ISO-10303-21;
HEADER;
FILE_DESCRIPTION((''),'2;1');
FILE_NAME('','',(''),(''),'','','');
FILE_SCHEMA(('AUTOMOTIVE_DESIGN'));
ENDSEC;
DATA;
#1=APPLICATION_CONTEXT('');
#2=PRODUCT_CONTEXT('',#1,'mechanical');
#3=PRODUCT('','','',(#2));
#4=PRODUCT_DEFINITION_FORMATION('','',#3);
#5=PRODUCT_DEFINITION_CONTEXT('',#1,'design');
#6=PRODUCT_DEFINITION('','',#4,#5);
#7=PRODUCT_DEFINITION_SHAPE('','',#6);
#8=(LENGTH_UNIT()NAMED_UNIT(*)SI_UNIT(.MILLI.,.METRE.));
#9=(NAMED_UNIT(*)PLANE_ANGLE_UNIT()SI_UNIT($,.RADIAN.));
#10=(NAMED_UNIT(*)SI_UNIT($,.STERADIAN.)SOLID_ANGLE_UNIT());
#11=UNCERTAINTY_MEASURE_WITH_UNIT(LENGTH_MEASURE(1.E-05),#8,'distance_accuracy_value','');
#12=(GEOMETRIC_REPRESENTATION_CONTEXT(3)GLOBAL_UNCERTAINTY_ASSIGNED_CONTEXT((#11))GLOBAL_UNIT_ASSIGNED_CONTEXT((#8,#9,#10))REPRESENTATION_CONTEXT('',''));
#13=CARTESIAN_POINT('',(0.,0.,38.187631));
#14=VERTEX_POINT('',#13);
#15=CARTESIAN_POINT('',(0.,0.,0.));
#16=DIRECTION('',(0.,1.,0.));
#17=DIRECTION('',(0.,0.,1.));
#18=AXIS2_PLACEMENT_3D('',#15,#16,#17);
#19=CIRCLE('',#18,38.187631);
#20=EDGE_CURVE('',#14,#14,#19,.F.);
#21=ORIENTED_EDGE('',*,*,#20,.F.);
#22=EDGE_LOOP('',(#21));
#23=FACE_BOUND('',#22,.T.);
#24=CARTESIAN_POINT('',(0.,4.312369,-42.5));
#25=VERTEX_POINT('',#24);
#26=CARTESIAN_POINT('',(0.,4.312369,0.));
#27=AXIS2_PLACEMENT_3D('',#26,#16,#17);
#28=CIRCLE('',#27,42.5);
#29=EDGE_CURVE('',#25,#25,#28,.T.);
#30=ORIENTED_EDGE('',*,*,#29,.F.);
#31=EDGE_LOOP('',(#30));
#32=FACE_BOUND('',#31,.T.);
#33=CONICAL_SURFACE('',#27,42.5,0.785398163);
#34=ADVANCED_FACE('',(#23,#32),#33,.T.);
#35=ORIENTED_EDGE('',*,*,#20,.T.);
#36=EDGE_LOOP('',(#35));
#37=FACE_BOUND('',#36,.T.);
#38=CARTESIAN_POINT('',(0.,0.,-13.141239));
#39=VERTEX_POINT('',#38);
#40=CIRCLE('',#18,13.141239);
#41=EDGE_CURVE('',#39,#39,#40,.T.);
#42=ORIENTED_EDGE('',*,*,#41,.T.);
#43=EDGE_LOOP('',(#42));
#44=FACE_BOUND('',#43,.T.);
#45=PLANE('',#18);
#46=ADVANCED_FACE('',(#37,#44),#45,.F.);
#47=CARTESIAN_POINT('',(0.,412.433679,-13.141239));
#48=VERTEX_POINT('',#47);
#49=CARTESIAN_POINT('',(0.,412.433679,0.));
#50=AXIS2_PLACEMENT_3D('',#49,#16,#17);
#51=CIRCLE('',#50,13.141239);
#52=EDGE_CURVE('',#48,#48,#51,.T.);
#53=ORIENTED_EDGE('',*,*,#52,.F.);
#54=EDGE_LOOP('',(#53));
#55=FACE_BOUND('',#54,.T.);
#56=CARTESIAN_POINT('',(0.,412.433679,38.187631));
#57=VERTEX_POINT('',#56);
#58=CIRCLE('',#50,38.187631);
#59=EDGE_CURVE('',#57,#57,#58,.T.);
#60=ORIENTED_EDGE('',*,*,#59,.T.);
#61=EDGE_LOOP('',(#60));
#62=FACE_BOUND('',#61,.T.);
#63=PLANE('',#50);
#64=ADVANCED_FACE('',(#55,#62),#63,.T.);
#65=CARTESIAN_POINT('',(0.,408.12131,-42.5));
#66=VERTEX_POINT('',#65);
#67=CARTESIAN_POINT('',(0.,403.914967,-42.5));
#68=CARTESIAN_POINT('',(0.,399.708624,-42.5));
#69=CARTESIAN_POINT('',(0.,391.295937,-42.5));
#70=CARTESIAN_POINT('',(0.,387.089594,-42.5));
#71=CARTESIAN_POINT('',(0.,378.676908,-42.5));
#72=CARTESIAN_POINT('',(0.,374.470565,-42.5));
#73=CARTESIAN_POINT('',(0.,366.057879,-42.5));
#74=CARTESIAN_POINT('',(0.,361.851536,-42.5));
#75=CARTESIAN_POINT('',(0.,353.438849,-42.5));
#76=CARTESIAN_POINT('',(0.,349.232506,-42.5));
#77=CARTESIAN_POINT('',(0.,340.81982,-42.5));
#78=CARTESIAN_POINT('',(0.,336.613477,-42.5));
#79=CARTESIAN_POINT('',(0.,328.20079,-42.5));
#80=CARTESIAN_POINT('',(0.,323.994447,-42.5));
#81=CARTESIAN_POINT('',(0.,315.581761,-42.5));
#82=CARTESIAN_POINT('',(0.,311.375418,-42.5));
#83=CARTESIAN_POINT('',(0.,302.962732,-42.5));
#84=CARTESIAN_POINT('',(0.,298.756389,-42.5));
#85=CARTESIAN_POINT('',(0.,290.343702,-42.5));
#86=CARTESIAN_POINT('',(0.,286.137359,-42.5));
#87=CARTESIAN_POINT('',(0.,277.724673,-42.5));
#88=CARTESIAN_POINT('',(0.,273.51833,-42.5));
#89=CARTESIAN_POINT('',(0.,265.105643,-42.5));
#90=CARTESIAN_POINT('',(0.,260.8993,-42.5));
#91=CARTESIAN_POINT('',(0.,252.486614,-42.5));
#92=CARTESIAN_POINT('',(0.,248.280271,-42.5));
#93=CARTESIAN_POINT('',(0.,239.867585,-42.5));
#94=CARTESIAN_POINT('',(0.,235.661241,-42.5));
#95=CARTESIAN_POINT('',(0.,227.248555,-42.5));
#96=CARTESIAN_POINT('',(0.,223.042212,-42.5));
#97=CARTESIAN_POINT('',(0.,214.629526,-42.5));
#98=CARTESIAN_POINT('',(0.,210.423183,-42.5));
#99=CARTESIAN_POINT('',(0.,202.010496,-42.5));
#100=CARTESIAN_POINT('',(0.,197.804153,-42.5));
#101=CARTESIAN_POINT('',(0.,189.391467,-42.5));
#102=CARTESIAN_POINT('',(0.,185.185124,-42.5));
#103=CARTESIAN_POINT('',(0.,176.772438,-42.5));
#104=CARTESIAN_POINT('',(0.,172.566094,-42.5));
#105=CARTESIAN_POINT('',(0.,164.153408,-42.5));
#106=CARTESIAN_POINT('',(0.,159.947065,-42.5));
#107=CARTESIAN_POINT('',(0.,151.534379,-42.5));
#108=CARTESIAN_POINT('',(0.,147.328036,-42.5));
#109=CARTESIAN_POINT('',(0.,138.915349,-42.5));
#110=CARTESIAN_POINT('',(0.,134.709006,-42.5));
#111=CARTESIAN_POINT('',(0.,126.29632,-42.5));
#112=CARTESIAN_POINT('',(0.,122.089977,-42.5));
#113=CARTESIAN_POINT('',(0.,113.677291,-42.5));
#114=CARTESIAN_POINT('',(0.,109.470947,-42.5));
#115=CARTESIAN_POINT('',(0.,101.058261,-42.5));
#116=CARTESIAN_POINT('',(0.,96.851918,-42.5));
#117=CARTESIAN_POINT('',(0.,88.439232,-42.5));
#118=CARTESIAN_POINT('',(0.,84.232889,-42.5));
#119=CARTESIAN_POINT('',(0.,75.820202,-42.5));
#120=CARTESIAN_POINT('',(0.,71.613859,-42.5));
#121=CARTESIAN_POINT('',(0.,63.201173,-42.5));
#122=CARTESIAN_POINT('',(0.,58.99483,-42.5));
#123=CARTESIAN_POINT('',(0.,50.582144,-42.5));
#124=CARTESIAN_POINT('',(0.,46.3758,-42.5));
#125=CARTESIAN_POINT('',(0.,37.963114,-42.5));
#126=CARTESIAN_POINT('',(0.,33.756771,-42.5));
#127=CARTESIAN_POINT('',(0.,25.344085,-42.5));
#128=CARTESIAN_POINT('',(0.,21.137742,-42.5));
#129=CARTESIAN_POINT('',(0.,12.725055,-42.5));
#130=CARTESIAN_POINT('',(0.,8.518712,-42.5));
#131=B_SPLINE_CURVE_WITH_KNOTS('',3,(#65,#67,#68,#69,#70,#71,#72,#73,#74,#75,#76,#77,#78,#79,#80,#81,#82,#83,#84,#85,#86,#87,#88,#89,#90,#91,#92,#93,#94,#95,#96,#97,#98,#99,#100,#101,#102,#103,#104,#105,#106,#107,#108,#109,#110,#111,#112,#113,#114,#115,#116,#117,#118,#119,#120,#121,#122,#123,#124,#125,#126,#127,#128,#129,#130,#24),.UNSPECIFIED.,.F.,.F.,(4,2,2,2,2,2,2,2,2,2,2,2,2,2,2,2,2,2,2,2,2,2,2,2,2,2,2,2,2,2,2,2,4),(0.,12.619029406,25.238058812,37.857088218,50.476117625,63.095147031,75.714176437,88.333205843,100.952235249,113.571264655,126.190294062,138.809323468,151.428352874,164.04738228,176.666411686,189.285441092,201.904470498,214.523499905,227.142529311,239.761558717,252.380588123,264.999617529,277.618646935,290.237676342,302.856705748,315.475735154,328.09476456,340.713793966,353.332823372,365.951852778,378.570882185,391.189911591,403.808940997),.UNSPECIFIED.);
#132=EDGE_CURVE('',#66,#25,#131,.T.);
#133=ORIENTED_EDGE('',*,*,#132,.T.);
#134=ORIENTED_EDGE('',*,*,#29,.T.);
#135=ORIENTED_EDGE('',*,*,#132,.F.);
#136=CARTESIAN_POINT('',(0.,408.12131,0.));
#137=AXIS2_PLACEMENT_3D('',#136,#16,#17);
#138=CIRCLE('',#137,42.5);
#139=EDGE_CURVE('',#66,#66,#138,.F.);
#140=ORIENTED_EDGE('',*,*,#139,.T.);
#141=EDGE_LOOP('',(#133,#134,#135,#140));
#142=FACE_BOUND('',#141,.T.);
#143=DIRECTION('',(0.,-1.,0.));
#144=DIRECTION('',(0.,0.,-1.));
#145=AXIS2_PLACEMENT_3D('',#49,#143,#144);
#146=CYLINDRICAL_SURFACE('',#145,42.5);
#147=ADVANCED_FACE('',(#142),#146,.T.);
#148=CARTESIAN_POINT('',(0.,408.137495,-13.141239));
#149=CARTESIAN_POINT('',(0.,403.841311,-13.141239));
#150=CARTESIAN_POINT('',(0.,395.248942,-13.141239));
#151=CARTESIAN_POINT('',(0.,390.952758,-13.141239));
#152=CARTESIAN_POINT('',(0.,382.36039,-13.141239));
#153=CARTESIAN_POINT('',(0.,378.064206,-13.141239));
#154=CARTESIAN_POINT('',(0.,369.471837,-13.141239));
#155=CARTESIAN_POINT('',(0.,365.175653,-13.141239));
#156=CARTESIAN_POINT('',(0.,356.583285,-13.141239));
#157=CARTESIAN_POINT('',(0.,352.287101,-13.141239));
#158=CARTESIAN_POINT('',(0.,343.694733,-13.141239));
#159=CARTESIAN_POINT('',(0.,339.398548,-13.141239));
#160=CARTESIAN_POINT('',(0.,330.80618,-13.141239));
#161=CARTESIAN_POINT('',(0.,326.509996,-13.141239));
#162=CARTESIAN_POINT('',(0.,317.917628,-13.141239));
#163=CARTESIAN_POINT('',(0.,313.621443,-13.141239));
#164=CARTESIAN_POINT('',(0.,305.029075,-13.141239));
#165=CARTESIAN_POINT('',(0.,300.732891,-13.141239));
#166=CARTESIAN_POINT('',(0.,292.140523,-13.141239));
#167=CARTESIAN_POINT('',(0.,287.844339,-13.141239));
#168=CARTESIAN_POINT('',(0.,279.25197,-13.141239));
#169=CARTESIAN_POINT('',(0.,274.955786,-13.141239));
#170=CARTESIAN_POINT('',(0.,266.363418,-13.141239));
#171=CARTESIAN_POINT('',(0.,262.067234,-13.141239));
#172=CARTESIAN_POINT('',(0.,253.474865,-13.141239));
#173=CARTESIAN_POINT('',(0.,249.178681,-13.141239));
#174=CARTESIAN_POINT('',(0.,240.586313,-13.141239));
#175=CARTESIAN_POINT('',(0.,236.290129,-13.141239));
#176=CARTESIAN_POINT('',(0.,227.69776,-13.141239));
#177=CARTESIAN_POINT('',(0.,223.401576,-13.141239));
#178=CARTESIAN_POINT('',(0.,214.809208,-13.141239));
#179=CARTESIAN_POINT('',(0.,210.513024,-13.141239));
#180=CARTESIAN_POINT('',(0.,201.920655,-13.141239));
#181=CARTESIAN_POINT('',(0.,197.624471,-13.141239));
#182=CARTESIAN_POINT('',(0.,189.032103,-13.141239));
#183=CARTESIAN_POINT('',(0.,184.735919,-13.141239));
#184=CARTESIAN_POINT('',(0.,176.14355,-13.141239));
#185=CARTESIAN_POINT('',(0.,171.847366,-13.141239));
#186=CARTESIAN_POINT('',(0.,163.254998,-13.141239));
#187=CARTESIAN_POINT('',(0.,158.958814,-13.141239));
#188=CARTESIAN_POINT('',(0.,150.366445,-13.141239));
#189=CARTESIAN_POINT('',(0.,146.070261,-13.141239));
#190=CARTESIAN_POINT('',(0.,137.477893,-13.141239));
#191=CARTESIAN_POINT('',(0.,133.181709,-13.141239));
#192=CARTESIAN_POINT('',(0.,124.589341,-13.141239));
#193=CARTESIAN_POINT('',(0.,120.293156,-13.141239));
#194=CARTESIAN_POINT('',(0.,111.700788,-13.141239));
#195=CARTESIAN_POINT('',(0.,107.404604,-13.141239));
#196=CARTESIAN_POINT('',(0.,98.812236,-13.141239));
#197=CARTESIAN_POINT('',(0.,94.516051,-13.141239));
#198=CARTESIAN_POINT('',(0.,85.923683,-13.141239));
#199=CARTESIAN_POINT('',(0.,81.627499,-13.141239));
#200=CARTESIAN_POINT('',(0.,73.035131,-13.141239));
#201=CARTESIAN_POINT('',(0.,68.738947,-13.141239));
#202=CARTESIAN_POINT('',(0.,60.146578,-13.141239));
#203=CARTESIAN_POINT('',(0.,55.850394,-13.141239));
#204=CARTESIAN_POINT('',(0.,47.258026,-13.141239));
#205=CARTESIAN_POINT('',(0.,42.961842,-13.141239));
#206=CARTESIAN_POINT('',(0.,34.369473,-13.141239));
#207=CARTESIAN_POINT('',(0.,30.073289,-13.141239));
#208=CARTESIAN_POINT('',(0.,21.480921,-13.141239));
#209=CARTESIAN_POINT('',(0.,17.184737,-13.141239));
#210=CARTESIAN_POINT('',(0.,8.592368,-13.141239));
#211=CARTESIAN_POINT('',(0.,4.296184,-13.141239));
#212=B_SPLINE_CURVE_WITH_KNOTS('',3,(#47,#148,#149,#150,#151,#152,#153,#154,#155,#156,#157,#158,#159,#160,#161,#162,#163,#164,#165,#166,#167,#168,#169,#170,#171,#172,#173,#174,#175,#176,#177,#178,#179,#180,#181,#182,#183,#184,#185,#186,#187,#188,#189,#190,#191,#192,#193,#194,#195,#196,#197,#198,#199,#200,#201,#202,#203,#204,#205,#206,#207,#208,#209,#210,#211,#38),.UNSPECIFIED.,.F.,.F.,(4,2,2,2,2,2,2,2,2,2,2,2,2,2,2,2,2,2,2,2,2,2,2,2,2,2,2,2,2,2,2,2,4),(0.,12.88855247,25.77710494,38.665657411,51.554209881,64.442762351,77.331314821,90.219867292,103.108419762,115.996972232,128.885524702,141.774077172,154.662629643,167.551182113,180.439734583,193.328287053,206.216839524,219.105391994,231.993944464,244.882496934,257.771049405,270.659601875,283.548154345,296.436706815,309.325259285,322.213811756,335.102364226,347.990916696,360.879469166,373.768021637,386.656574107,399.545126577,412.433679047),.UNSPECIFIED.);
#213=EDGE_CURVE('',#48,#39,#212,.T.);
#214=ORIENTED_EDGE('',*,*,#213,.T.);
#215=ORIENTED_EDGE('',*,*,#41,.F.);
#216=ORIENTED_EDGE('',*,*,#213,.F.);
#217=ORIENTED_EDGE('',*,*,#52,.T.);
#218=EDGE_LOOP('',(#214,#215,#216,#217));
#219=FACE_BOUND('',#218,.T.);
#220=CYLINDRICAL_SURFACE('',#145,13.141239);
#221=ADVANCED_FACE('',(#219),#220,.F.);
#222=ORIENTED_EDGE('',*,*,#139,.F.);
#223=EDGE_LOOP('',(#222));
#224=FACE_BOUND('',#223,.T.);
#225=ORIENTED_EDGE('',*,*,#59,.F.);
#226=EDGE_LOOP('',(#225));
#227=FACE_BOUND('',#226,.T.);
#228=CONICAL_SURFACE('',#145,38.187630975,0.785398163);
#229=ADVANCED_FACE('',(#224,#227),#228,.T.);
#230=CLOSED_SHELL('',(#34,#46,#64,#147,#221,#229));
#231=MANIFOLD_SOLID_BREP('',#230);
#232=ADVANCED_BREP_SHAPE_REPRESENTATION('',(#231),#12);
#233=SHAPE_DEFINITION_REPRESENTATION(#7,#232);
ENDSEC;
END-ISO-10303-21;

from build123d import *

# Parameters (mm, degrees)
SKETCH1_R           = 42.5
BOSS_EXTRUDE1_DEPTH = 412.433679047
SKETCH2_R           = 13.141238518
CUT_EXTRUDE1_DEPTH  = 417.790162567
CHAMFER1_SIZE       = 4.312369025


with BuildPart() as part:
    # Sketch1 → Boss-Extrude1 (new body)
    with BuildSketch(Plane(origin=(0, 0, 0), x_dir=(1, 0, 0), z_dir=(0, 1, 0))):
        Circle(SKETCH1_R)
    extrude(amount=BOSS_EXTRUDE1_DEPTH)

    # Sketch2 → Cut-Extrude1 (cut, through all)
    with BuildSketch(Plane(origin=(0, 0, 0), x_dir=(1, 0, 0), z_dir=(0, 1, 0))):
        Circle(SKETCH2_R)
    extrude(amount=CUT_EXTRUDE1_DEPTH, mode=Mode.SUBTRACT)

    # Chamfer1
    chamfer1_edges = [part.edges().sort_by_distance(p)[0] for p in [
        (-42.5, 412.433679047, 0),
        (-42.5, 0, 0),
    ]]
    chamfer(chamfer1_edges, length=CHAMFER1_SIZE)


solid = part.part
